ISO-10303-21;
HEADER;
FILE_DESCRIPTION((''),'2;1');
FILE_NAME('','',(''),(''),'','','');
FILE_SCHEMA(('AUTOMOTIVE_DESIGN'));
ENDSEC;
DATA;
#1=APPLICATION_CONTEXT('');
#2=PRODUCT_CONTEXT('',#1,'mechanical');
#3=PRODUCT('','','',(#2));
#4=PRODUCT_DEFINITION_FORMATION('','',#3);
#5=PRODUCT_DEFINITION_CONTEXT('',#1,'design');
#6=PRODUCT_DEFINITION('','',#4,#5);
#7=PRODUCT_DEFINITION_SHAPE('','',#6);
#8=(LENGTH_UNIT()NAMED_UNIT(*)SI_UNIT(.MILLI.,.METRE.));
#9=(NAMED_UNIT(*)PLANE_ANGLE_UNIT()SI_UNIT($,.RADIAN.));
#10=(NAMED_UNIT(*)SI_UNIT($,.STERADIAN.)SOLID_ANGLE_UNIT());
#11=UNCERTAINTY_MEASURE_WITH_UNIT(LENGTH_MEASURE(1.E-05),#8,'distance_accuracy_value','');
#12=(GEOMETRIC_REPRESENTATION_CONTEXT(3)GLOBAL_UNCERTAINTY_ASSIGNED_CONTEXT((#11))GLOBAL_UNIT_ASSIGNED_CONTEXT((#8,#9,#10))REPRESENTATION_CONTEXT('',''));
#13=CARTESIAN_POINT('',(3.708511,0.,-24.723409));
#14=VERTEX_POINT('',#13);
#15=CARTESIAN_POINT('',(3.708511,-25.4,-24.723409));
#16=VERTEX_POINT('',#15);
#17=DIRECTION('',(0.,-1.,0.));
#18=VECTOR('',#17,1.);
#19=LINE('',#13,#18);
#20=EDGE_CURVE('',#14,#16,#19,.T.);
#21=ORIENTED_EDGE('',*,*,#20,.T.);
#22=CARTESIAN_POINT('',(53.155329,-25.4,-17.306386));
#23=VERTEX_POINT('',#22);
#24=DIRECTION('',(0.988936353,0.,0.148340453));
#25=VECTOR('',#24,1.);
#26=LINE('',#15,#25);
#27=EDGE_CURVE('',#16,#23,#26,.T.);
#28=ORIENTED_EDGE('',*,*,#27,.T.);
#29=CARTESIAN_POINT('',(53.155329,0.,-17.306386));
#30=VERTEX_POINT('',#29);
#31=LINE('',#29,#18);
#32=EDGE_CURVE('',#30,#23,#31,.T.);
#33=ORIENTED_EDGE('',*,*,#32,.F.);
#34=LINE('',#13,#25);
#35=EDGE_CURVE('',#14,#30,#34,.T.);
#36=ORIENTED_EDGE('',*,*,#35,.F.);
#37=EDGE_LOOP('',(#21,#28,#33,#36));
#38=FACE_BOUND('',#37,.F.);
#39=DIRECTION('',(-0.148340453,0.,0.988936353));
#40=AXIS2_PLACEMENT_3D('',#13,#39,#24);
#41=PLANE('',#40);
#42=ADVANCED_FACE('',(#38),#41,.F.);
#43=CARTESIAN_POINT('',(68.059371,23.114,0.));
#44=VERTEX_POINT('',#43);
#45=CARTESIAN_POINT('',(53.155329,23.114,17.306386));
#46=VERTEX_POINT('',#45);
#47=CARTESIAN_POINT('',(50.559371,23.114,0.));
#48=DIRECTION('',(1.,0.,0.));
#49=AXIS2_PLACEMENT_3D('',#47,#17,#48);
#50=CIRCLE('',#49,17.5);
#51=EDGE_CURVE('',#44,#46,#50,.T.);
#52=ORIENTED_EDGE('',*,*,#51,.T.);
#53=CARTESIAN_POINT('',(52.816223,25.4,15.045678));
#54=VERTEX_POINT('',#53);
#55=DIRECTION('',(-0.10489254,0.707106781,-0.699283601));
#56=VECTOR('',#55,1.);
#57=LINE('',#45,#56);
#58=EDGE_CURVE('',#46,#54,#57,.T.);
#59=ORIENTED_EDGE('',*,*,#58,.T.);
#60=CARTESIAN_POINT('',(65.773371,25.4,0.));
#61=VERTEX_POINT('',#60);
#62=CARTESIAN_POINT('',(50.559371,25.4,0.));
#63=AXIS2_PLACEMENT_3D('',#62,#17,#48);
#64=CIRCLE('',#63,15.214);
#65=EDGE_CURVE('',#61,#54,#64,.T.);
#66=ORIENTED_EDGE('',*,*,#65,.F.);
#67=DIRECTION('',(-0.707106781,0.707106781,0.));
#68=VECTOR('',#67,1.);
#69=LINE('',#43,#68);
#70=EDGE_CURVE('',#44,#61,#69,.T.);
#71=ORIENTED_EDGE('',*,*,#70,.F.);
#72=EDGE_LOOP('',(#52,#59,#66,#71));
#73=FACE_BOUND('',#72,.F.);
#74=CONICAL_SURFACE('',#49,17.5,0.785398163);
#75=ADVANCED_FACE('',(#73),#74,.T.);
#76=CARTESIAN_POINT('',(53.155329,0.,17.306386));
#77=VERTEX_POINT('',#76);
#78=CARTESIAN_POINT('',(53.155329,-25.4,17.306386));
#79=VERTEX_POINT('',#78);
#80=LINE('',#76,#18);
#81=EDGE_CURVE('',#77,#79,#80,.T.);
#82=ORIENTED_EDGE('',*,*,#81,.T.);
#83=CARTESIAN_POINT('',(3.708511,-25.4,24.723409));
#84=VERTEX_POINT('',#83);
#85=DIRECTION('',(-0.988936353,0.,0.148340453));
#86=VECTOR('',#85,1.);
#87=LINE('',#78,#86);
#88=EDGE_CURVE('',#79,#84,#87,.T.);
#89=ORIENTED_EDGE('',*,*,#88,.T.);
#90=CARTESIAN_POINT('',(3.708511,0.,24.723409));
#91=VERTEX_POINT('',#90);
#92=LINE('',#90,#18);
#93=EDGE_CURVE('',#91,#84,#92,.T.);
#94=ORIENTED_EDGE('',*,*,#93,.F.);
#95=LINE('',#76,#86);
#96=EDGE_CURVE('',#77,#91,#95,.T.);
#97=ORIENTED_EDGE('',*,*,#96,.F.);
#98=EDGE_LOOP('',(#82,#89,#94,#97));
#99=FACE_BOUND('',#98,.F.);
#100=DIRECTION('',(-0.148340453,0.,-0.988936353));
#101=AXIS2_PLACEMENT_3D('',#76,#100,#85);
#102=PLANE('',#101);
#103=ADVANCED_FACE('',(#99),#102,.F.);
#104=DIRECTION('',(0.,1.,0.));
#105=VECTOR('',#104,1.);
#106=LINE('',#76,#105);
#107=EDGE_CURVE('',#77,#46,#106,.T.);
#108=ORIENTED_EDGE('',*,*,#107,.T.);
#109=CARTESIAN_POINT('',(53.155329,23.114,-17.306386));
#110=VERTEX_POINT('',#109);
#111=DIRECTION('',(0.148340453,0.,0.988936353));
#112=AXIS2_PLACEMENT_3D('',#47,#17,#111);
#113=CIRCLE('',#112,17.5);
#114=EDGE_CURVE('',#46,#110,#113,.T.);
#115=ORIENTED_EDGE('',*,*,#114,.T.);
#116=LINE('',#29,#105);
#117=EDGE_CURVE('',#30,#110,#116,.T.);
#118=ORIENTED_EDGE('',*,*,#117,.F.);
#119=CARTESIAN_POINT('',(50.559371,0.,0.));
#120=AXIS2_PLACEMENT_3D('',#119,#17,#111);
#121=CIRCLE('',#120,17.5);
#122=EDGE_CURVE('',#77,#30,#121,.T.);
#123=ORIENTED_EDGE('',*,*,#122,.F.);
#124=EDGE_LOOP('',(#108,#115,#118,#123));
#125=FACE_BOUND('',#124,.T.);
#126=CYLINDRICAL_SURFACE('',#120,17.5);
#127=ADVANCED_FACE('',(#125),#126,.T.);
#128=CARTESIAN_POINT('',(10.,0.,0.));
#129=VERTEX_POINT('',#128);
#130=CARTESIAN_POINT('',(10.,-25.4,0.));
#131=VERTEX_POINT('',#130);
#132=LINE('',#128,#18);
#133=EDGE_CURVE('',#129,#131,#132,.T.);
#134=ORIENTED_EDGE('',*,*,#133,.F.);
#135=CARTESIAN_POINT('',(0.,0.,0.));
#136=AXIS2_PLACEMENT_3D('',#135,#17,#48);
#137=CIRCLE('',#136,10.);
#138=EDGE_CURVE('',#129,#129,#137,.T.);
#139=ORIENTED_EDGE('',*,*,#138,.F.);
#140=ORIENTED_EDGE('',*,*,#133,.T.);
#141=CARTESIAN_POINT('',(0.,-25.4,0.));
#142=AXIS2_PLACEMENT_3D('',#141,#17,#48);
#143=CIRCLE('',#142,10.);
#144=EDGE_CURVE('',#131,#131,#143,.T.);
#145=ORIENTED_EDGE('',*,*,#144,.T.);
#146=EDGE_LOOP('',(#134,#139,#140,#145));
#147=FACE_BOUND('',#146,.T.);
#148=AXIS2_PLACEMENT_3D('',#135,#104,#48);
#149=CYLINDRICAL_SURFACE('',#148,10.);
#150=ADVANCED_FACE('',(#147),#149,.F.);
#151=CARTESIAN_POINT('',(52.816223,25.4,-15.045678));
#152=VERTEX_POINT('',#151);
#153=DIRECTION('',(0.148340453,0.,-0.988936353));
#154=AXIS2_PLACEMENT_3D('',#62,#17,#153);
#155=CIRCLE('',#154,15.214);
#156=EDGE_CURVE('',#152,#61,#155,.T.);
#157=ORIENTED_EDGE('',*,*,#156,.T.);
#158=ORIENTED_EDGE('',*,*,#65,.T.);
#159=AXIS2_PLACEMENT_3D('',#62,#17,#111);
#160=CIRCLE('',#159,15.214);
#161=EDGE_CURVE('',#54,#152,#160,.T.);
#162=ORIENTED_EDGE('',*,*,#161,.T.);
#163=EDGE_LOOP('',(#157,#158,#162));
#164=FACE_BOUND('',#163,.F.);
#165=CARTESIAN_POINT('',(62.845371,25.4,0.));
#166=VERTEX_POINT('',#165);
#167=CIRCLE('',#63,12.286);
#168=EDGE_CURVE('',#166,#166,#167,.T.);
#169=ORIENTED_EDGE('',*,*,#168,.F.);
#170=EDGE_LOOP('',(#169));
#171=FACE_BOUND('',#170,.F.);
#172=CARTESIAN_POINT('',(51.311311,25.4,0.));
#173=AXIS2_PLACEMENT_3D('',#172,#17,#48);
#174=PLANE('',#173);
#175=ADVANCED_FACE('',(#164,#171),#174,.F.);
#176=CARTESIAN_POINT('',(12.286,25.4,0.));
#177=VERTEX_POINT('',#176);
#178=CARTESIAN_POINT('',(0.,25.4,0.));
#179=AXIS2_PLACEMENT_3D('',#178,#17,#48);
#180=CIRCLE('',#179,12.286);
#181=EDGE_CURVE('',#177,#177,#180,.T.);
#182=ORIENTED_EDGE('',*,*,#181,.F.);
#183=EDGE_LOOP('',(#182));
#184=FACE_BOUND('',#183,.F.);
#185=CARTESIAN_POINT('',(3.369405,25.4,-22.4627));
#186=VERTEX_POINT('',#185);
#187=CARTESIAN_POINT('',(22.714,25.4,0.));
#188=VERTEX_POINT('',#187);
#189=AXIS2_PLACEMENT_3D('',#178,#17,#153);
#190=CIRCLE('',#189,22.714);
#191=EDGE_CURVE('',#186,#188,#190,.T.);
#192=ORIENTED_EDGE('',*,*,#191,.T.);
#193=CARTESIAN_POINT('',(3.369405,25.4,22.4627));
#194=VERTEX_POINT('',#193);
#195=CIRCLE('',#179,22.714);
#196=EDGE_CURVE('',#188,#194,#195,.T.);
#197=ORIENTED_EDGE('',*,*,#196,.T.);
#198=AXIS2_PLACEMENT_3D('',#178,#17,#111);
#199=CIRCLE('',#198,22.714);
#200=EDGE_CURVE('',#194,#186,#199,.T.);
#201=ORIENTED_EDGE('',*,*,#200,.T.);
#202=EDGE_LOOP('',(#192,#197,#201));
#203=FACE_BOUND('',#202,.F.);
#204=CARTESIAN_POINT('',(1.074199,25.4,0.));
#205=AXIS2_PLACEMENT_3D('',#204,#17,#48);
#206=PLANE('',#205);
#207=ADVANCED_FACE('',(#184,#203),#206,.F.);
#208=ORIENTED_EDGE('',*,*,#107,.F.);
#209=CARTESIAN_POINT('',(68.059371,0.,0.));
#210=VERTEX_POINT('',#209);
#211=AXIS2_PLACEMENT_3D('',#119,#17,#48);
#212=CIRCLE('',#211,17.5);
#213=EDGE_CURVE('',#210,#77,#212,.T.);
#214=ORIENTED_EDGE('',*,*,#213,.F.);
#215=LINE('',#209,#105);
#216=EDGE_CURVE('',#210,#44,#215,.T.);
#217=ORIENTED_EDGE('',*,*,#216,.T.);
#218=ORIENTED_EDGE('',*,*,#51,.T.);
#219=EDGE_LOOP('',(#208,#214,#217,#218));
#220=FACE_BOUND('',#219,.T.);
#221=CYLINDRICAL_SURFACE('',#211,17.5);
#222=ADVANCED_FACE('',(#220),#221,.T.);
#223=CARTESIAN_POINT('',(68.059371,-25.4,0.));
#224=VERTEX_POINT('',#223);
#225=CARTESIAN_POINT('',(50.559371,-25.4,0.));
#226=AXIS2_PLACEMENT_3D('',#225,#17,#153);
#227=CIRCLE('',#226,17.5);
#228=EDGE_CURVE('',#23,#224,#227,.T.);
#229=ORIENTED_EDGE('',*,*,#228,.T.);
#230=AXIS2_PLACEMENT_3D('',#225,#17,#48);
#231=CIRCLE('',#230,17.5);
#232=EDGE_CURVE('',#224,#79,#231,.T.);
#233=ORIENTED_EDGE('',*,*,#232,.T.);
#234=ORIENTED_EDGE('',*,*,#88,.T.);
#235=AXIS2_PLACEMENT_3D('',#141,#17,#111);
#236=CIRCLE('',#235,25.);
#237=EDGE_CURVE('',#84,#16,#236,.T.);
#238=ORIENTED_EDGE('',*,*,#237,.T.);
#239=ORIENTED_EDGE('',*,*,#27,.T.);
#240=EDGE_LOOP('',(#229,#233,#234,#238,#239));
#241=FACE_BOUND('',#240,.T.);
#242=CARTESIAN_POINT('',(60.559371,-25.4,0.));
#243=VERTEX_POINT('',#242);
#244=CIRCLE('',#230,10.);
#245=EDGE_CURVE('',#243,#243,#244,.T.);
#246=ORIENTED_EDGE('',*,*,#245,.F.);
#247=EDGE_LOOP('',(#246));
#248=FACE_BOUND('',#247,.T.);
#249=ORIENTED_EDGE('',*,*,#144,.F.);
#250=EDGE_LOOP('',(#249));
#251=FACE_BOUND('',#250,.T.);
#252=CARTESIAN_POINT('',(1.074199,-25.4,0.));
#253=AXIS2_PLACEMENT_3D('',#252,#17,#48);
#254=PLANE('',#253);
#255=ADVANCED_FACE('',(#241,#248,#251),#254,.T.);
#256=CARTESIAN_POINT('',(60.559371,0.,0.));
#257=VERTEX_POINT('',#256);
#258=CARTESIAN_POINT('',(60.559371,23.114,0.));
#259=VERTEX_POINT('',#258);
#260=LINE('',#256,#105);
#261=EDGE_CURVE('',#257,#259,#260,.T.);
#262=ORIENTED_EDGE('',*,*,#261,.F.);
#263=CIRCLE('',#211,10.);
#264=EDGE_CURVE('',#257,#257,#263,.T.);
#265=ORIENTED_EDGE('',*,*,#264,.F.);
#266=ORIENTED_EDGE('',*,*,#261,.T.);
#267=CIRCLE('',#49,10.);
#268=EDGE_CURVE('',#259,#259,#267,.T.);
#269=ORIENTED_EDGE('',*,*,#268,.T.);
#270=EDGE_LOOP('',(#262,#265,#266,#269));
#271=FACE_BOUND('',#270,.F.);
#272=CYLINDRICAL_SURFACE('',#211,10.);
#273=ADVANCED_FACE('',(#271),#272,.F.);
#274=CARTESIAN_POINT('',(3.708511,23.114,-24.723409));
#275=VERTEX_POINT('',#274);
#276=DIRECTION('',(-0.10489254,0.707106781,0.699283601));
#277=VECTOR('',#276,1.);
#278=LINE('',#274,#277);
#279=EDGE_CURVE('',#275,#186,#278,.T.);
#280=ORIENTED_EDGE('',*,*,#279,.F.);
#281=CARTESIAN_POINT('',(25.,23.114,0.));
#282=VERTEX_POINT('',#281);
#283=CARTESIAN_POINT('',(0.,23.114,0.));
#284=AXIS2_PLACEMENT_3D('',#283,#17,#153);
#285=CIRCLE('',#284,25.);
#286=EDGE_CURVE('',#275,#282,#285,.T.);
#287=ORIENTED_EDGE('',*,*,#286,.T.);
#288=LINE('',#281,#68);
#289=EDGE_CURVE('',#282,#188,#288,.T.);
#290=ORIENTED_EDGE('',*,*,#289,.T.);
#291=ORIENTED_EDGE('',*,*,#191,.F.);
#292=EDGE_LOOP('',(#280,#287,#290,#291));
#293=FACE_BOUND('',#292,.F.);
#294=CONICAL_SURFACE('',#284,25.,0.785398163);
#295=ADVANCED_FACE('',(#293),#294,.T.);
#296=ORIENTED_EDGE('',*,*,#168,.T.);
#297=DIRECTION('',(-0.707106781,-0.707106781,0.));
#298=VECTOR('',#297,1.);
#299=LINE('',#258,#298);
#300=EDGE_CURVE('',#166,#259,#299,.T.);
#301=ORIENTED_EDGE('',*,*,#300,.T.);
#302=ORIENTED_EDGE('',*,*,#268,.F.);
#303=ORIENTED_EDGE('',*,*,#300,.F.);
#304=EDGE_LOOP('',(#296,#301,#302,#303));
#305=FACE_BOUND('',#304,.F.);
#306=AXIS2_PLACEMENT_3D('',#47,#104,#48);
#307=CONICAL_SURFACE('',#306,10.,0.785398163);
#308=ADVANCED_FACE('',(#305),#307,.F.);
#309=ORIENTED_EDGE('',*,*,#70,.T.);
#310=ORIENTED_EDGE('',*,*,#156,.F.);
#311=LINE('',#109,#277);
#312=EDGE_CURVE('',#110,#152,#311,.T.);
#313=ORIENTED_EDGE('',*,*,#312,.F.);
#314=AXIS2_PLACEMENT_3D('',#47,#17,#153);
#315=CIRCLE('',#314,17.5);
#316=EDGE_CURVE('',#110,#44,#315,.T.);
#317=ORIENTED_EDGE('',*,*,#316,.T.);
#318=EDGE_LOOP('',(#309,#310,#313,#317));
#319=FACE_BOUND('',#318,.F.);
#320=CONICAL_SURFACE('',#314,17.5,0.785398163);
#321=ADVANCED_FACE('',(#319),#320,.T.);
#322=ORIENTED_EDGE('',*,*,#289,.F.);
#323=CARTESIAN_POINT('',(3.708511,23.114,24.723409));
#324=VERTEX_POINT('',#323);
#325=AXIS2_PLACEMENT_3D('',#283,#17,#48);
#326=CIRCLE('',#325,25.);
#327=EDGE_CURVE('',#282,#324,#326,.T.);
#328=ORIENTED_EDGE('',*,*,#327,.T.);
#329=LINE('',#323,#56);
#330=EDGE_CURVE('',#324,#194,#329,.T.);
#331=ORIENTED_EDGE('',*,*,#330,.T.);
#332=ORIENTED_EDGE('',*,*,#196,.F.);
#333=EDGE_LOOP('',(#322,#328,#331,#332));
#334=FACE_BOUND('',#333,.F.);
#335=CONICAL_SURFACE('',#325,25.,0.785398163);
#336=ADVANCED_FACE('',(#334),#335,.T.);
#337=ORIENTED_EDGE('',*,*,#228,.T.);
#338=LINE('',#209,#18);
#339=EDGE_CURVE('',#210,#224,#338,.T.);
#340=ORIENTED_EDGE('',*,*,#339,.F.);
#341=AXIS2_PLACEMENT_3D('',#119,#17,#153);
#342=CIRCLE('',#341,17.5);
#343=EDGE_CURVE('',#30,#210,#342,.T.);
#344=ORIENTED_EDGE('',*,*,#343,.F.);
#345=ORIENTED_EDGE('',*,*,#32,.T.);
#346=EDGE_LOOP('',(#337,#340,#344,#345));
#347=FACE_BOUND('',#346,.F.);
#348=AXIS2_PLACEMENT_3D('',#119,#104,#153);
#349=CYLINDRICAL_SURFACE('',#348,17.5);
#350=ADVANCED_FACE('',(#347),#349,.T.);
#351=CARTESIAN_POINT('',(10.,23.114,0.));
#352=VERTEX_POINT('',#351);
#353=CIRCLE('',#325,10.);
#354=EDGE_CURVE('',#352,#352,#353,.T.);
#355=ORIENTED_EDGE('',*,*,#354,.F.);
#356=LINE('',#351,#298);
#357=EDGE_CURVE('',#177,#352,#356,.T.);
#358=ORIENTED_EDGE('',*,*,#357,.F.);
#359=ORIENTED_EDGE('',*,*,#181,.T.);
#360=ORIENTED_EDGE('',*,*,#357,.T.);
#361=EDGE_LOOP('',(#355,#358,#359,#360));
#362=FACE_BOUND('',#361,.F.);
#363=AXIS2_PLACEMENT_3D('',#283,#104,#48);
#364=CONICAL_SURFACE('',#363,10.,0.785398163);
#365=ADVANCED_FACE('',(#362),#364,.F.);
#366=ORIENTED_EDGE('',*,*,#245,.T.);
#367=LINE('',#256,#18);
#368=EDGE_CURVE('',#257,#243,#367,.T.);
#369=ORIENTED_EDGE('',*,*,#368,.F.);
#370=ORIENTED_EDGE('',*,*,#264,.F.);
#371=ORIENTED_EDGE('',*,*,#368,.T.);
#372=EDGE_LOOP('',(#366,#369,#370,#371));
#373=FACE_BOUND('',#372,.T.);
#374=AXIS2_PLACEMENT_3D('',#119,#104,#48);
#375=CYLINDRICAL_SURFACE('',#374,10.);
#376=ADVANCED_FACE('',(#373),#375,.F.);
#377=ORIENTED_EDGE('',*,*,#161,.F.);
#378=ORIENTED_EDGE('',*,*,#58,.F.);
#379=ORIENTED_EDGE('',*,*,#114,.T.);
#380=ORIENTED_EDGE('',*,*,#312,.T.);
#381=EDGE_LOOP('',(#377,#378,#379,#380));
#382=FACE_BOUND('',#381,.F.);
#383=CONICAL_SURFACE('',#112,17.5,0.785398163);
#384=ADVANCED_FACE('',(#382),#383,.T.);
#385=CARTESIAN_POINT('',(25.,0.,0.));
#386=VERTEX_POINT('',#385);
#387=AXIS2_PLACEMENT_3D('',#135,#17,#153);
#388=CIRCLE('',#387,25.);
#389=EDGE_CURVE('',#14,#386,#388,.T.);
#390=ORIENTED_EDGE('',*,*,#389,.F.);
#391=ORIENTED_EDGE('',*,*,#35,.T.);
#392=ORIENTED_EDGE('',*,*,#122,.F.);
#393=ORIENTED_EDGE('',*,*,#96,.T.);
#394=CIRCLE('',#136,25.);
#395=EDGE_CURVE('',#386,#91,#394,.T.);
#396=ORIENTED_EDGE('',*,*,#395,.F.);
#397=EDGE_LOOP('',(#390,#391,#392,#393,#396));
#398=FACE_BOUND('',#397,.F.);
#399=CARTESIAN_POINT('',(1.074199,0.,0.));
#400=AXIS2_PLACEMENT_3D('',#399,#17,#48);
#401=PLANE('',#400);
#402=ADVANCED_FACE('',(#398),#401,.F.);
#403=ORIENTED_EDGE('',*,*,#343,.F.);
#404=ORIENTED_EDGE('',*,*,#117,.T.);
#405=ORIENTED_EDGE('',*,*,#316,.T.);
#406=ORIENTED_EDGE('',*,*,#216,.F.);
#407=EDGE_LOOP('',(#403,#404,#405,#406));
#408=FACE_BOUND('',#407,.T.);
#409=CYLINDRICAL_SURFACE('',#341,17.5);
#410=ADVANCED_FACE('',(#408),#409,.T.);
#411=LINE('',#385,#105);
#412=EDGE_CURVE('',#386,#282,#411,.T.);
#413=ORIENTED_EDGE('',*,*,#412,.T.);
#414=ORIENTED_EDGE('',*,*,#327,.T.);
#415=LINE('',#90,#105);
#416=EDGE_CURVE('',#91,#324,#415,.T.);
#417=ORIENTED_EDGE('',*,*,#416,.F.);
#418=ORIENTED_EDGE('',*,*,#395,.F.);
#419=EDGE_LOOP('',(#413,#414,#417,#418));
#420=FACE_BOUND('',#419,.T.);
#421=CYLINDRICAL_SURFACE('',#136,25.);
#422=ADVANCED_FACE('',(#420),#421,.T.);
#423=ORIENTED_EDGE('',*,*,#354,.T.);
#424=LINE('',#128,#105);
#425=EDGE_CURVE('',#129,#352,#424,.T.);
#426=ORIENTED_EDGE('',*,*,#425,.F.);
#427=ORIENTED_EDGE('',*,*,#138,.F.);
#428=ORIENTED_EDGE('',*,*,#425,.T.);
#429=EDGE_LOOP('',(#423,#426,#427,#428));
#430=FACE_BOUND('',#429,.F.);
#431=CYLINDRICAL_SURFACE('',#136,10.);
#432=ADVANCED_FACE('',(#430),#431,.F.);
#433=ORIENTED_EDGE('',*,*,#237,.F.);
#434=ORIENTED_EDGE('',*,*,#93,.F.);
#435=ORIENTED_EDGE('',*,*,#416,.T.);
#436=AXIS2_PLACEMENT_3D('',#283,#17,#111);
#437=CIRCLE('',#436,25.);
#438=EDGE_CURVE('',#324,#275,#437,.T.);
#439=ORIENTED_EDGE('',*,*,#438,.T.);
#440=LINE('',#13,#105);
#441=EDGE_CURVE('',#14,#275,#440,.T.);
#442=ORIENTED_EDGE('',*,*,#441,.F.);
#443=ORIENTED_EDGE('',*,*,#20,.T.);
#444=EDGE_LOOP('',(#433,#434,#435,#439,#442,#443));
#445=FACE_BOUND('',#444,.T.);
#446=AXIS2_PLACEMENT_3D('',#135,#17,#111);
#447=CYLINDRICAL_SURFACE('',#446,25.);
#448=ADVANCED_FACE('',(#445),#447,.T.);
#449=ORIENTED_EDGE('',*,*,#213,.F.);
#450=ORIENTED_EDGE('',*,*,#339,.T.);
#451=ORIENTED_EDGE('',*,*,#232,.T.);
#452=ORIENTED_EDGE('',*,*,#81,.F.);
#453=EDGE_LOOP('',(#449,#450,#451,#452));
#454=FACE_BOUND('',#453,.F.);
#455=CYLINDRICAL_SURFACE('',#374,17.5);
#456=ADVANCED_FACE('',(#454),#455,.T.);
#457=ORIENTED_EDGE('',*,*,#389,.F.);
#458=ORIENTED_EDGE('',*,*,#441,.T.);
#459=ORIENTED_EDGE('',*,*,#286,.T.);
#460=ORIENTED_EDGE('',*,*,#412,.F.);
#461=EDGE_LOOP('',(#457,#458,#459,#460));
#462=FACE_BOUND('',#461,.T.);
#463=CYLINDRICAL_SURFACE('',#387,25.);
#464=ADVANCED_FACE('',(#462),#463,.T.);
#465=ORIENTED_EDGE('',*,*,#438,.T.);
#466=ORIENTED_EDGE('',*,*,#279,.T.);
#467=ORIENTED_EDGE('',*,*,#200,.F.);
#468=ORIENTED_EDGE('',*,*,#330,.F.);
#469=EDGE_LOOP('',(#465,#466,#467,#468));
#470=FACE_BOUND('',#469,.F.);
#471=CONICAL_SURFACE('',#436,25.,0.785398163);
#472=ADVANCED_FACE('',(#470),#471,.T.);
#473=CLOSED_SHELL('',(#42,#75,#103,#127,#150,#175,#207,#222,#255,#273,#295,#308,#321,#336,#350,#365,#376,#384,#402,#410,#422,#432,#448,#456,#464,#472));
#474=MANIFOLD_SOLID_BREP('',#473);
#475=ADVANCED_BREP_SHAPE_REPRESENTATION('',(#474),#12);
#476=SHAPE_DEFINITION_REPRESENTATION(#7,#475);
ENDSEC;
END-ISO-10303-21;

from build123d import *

# Parameters (mm, degrees)
F0_R     = 10
F1_DEPTH = 25.4
F3_DEPTH = 25.4
F4_DEPTH = 25.4
F5_SIZE  = 2.286


# Not quite as in the source:
# - the program builds the solid bodies; features that only make, move or delete a surface that nothing else refers to are left out


with BuildPart() as f1:
    # F0 (on Front) → F1 (new body)
    with BuildSketch(Plane.XZ):
        with BuildLine():
            ThreePointArc((3.7085113233, -24.7234088217), (18.9435052601, -16.313908436), (25, 0))
            ThreePointArc((25, 0), (18.9435052601, 16.313908436), (3.7085113233, 24.7234088217))
            ThreePointArc((3.7085113233, 24.7234088217), (-25, 0), (3.7085113233, -24.7234088217))
        make_face()
        Circle(F0_R, mode=Mode.SUBTRACT)
        with BuildLine():
            ThreePointArc((3.7085113233, 24.7234088217), (18.9435052601, 16.313908436), (25, 0))
            ThreePointArc((25, 0), (18.9435052601, -16.313908436), (3.7085113233, -24.7234088217))
            Line((3.7085113233, -24.7234088217), (53.1553289667, -17.3063861752))
            ThreePointArc((53.1553289667, -17.3063861752), (33.0593710404, 0), (53.1553289667, 17.3063861752))
            Line((53.1553289667, 17.3063861752), (3.7085113233, 24.7234088217))
        make_face()
        with BuildLine():
            ThreePointArc((68.0593710404, 0), (63.8198247225, 11.4197359052), (53.1553289667, 17.3063861752))
            ThreePointArc((53.1553289667, 17.3063861752), (33.0593710404, 0), (53.1553289667, -17.3063861752))
            ThreePointArc((53.1553289667, -17.3063861752), (63.8198247225, -11.4197359052), (68.0593710404, 0))
        make_face()
        with Locations((50.5593710404, 0)):
            Circle(F0_R, mode=Mode.SUBTRACT)
    extrude(amount=F1_DEPTH)

    # F0 (on Front) → F3 (join)
    with BuildSketch(Plane.XZ):
        with BuildLine():
            ThreePointArc((3.7085113233, -24.7234088217), (18.9435052601, -16.313908436), (25, 0))
            ThreePointArc((25, 0), (18.9435052601, 16.313908436), (3.7085113233, 24.7234088217))
            ThreePointArc((3.7085113233, 24.7234088217), (-25, 0), (3.7085113233, -24.7234088217))
        make_face()
        Circle(F0_R, mode=Mode.SUBTRACT)
        with BuildLine():
            ThreePointArc((68.0593710404, 0), (63.8198247225, 11.4197359052), (53.1553289667, 17.3063861752))
            ThreePointArc((53.1553289667, 17.3063861752), (33.0593710404, 0), (53.1553289667, -17.3063861752))
            ThreePointArc((53.1553289667, -17.3063861752), (63.8198247225, -11.4197359052), (68.0593710404, 0))
        make_face()
        with Locations((50.5593710404, 0)):
            Circle(F0_R, mode=Mode.SUBTRACT)
    extrude(amount=F3_DEPTH)

    # F0 (on Front) → F4 (join)
    with BuildSketch(Plane.XZ):
        with BuildLine():
            ThreePointArc((3.7085113233, -24.7234088217), (18.9435052601, -16.313908436), (25, 0))
            ThreePointArc((25, 0), (18.9435052601, 16.313908436), (3.7085113233, 24.7234088217))
            ThreePointArc((3.7085113233, 24.7234088217), (-25, 0), (3.7085113233, -24.7234088217))
        make_face()
        Circle(F0_R, mode=Mode.SUBTRACT)
        with BuildLine():
            ThreePointArc((68.0593710404, 0), (63.8198247225, 11.4197359052), (53.1553289667, 17.3063861752))
            ThreePointArc((53.1553289667, 17.3063861752), (33.0593710404, 0), (53.1553289667, -17.3063861752))
            ThreePointArc((53.1553289667, -17.3063861752), (63.8198247225, -11.4197359052), (68.0593710404, 0))
        make_face()
        with Locations((50.5593710404, 0)):
            Circle(F0_R, mode=Mode.SUBTRACT)
    extrude(amount=-F4_DEPTH)

    # F5
    f5_edges = [f1.edges().sort_by_distance(p)[0] for p in [
        (-10, 25.4, 0),
        (-25, 25.4, 0),
        (33.059371, 25.4, 0),
        (40.559371, 25.4, 0),
    ]]
    chamfer(f5_edges, length=F5_SIZE)


solid = f1.part
